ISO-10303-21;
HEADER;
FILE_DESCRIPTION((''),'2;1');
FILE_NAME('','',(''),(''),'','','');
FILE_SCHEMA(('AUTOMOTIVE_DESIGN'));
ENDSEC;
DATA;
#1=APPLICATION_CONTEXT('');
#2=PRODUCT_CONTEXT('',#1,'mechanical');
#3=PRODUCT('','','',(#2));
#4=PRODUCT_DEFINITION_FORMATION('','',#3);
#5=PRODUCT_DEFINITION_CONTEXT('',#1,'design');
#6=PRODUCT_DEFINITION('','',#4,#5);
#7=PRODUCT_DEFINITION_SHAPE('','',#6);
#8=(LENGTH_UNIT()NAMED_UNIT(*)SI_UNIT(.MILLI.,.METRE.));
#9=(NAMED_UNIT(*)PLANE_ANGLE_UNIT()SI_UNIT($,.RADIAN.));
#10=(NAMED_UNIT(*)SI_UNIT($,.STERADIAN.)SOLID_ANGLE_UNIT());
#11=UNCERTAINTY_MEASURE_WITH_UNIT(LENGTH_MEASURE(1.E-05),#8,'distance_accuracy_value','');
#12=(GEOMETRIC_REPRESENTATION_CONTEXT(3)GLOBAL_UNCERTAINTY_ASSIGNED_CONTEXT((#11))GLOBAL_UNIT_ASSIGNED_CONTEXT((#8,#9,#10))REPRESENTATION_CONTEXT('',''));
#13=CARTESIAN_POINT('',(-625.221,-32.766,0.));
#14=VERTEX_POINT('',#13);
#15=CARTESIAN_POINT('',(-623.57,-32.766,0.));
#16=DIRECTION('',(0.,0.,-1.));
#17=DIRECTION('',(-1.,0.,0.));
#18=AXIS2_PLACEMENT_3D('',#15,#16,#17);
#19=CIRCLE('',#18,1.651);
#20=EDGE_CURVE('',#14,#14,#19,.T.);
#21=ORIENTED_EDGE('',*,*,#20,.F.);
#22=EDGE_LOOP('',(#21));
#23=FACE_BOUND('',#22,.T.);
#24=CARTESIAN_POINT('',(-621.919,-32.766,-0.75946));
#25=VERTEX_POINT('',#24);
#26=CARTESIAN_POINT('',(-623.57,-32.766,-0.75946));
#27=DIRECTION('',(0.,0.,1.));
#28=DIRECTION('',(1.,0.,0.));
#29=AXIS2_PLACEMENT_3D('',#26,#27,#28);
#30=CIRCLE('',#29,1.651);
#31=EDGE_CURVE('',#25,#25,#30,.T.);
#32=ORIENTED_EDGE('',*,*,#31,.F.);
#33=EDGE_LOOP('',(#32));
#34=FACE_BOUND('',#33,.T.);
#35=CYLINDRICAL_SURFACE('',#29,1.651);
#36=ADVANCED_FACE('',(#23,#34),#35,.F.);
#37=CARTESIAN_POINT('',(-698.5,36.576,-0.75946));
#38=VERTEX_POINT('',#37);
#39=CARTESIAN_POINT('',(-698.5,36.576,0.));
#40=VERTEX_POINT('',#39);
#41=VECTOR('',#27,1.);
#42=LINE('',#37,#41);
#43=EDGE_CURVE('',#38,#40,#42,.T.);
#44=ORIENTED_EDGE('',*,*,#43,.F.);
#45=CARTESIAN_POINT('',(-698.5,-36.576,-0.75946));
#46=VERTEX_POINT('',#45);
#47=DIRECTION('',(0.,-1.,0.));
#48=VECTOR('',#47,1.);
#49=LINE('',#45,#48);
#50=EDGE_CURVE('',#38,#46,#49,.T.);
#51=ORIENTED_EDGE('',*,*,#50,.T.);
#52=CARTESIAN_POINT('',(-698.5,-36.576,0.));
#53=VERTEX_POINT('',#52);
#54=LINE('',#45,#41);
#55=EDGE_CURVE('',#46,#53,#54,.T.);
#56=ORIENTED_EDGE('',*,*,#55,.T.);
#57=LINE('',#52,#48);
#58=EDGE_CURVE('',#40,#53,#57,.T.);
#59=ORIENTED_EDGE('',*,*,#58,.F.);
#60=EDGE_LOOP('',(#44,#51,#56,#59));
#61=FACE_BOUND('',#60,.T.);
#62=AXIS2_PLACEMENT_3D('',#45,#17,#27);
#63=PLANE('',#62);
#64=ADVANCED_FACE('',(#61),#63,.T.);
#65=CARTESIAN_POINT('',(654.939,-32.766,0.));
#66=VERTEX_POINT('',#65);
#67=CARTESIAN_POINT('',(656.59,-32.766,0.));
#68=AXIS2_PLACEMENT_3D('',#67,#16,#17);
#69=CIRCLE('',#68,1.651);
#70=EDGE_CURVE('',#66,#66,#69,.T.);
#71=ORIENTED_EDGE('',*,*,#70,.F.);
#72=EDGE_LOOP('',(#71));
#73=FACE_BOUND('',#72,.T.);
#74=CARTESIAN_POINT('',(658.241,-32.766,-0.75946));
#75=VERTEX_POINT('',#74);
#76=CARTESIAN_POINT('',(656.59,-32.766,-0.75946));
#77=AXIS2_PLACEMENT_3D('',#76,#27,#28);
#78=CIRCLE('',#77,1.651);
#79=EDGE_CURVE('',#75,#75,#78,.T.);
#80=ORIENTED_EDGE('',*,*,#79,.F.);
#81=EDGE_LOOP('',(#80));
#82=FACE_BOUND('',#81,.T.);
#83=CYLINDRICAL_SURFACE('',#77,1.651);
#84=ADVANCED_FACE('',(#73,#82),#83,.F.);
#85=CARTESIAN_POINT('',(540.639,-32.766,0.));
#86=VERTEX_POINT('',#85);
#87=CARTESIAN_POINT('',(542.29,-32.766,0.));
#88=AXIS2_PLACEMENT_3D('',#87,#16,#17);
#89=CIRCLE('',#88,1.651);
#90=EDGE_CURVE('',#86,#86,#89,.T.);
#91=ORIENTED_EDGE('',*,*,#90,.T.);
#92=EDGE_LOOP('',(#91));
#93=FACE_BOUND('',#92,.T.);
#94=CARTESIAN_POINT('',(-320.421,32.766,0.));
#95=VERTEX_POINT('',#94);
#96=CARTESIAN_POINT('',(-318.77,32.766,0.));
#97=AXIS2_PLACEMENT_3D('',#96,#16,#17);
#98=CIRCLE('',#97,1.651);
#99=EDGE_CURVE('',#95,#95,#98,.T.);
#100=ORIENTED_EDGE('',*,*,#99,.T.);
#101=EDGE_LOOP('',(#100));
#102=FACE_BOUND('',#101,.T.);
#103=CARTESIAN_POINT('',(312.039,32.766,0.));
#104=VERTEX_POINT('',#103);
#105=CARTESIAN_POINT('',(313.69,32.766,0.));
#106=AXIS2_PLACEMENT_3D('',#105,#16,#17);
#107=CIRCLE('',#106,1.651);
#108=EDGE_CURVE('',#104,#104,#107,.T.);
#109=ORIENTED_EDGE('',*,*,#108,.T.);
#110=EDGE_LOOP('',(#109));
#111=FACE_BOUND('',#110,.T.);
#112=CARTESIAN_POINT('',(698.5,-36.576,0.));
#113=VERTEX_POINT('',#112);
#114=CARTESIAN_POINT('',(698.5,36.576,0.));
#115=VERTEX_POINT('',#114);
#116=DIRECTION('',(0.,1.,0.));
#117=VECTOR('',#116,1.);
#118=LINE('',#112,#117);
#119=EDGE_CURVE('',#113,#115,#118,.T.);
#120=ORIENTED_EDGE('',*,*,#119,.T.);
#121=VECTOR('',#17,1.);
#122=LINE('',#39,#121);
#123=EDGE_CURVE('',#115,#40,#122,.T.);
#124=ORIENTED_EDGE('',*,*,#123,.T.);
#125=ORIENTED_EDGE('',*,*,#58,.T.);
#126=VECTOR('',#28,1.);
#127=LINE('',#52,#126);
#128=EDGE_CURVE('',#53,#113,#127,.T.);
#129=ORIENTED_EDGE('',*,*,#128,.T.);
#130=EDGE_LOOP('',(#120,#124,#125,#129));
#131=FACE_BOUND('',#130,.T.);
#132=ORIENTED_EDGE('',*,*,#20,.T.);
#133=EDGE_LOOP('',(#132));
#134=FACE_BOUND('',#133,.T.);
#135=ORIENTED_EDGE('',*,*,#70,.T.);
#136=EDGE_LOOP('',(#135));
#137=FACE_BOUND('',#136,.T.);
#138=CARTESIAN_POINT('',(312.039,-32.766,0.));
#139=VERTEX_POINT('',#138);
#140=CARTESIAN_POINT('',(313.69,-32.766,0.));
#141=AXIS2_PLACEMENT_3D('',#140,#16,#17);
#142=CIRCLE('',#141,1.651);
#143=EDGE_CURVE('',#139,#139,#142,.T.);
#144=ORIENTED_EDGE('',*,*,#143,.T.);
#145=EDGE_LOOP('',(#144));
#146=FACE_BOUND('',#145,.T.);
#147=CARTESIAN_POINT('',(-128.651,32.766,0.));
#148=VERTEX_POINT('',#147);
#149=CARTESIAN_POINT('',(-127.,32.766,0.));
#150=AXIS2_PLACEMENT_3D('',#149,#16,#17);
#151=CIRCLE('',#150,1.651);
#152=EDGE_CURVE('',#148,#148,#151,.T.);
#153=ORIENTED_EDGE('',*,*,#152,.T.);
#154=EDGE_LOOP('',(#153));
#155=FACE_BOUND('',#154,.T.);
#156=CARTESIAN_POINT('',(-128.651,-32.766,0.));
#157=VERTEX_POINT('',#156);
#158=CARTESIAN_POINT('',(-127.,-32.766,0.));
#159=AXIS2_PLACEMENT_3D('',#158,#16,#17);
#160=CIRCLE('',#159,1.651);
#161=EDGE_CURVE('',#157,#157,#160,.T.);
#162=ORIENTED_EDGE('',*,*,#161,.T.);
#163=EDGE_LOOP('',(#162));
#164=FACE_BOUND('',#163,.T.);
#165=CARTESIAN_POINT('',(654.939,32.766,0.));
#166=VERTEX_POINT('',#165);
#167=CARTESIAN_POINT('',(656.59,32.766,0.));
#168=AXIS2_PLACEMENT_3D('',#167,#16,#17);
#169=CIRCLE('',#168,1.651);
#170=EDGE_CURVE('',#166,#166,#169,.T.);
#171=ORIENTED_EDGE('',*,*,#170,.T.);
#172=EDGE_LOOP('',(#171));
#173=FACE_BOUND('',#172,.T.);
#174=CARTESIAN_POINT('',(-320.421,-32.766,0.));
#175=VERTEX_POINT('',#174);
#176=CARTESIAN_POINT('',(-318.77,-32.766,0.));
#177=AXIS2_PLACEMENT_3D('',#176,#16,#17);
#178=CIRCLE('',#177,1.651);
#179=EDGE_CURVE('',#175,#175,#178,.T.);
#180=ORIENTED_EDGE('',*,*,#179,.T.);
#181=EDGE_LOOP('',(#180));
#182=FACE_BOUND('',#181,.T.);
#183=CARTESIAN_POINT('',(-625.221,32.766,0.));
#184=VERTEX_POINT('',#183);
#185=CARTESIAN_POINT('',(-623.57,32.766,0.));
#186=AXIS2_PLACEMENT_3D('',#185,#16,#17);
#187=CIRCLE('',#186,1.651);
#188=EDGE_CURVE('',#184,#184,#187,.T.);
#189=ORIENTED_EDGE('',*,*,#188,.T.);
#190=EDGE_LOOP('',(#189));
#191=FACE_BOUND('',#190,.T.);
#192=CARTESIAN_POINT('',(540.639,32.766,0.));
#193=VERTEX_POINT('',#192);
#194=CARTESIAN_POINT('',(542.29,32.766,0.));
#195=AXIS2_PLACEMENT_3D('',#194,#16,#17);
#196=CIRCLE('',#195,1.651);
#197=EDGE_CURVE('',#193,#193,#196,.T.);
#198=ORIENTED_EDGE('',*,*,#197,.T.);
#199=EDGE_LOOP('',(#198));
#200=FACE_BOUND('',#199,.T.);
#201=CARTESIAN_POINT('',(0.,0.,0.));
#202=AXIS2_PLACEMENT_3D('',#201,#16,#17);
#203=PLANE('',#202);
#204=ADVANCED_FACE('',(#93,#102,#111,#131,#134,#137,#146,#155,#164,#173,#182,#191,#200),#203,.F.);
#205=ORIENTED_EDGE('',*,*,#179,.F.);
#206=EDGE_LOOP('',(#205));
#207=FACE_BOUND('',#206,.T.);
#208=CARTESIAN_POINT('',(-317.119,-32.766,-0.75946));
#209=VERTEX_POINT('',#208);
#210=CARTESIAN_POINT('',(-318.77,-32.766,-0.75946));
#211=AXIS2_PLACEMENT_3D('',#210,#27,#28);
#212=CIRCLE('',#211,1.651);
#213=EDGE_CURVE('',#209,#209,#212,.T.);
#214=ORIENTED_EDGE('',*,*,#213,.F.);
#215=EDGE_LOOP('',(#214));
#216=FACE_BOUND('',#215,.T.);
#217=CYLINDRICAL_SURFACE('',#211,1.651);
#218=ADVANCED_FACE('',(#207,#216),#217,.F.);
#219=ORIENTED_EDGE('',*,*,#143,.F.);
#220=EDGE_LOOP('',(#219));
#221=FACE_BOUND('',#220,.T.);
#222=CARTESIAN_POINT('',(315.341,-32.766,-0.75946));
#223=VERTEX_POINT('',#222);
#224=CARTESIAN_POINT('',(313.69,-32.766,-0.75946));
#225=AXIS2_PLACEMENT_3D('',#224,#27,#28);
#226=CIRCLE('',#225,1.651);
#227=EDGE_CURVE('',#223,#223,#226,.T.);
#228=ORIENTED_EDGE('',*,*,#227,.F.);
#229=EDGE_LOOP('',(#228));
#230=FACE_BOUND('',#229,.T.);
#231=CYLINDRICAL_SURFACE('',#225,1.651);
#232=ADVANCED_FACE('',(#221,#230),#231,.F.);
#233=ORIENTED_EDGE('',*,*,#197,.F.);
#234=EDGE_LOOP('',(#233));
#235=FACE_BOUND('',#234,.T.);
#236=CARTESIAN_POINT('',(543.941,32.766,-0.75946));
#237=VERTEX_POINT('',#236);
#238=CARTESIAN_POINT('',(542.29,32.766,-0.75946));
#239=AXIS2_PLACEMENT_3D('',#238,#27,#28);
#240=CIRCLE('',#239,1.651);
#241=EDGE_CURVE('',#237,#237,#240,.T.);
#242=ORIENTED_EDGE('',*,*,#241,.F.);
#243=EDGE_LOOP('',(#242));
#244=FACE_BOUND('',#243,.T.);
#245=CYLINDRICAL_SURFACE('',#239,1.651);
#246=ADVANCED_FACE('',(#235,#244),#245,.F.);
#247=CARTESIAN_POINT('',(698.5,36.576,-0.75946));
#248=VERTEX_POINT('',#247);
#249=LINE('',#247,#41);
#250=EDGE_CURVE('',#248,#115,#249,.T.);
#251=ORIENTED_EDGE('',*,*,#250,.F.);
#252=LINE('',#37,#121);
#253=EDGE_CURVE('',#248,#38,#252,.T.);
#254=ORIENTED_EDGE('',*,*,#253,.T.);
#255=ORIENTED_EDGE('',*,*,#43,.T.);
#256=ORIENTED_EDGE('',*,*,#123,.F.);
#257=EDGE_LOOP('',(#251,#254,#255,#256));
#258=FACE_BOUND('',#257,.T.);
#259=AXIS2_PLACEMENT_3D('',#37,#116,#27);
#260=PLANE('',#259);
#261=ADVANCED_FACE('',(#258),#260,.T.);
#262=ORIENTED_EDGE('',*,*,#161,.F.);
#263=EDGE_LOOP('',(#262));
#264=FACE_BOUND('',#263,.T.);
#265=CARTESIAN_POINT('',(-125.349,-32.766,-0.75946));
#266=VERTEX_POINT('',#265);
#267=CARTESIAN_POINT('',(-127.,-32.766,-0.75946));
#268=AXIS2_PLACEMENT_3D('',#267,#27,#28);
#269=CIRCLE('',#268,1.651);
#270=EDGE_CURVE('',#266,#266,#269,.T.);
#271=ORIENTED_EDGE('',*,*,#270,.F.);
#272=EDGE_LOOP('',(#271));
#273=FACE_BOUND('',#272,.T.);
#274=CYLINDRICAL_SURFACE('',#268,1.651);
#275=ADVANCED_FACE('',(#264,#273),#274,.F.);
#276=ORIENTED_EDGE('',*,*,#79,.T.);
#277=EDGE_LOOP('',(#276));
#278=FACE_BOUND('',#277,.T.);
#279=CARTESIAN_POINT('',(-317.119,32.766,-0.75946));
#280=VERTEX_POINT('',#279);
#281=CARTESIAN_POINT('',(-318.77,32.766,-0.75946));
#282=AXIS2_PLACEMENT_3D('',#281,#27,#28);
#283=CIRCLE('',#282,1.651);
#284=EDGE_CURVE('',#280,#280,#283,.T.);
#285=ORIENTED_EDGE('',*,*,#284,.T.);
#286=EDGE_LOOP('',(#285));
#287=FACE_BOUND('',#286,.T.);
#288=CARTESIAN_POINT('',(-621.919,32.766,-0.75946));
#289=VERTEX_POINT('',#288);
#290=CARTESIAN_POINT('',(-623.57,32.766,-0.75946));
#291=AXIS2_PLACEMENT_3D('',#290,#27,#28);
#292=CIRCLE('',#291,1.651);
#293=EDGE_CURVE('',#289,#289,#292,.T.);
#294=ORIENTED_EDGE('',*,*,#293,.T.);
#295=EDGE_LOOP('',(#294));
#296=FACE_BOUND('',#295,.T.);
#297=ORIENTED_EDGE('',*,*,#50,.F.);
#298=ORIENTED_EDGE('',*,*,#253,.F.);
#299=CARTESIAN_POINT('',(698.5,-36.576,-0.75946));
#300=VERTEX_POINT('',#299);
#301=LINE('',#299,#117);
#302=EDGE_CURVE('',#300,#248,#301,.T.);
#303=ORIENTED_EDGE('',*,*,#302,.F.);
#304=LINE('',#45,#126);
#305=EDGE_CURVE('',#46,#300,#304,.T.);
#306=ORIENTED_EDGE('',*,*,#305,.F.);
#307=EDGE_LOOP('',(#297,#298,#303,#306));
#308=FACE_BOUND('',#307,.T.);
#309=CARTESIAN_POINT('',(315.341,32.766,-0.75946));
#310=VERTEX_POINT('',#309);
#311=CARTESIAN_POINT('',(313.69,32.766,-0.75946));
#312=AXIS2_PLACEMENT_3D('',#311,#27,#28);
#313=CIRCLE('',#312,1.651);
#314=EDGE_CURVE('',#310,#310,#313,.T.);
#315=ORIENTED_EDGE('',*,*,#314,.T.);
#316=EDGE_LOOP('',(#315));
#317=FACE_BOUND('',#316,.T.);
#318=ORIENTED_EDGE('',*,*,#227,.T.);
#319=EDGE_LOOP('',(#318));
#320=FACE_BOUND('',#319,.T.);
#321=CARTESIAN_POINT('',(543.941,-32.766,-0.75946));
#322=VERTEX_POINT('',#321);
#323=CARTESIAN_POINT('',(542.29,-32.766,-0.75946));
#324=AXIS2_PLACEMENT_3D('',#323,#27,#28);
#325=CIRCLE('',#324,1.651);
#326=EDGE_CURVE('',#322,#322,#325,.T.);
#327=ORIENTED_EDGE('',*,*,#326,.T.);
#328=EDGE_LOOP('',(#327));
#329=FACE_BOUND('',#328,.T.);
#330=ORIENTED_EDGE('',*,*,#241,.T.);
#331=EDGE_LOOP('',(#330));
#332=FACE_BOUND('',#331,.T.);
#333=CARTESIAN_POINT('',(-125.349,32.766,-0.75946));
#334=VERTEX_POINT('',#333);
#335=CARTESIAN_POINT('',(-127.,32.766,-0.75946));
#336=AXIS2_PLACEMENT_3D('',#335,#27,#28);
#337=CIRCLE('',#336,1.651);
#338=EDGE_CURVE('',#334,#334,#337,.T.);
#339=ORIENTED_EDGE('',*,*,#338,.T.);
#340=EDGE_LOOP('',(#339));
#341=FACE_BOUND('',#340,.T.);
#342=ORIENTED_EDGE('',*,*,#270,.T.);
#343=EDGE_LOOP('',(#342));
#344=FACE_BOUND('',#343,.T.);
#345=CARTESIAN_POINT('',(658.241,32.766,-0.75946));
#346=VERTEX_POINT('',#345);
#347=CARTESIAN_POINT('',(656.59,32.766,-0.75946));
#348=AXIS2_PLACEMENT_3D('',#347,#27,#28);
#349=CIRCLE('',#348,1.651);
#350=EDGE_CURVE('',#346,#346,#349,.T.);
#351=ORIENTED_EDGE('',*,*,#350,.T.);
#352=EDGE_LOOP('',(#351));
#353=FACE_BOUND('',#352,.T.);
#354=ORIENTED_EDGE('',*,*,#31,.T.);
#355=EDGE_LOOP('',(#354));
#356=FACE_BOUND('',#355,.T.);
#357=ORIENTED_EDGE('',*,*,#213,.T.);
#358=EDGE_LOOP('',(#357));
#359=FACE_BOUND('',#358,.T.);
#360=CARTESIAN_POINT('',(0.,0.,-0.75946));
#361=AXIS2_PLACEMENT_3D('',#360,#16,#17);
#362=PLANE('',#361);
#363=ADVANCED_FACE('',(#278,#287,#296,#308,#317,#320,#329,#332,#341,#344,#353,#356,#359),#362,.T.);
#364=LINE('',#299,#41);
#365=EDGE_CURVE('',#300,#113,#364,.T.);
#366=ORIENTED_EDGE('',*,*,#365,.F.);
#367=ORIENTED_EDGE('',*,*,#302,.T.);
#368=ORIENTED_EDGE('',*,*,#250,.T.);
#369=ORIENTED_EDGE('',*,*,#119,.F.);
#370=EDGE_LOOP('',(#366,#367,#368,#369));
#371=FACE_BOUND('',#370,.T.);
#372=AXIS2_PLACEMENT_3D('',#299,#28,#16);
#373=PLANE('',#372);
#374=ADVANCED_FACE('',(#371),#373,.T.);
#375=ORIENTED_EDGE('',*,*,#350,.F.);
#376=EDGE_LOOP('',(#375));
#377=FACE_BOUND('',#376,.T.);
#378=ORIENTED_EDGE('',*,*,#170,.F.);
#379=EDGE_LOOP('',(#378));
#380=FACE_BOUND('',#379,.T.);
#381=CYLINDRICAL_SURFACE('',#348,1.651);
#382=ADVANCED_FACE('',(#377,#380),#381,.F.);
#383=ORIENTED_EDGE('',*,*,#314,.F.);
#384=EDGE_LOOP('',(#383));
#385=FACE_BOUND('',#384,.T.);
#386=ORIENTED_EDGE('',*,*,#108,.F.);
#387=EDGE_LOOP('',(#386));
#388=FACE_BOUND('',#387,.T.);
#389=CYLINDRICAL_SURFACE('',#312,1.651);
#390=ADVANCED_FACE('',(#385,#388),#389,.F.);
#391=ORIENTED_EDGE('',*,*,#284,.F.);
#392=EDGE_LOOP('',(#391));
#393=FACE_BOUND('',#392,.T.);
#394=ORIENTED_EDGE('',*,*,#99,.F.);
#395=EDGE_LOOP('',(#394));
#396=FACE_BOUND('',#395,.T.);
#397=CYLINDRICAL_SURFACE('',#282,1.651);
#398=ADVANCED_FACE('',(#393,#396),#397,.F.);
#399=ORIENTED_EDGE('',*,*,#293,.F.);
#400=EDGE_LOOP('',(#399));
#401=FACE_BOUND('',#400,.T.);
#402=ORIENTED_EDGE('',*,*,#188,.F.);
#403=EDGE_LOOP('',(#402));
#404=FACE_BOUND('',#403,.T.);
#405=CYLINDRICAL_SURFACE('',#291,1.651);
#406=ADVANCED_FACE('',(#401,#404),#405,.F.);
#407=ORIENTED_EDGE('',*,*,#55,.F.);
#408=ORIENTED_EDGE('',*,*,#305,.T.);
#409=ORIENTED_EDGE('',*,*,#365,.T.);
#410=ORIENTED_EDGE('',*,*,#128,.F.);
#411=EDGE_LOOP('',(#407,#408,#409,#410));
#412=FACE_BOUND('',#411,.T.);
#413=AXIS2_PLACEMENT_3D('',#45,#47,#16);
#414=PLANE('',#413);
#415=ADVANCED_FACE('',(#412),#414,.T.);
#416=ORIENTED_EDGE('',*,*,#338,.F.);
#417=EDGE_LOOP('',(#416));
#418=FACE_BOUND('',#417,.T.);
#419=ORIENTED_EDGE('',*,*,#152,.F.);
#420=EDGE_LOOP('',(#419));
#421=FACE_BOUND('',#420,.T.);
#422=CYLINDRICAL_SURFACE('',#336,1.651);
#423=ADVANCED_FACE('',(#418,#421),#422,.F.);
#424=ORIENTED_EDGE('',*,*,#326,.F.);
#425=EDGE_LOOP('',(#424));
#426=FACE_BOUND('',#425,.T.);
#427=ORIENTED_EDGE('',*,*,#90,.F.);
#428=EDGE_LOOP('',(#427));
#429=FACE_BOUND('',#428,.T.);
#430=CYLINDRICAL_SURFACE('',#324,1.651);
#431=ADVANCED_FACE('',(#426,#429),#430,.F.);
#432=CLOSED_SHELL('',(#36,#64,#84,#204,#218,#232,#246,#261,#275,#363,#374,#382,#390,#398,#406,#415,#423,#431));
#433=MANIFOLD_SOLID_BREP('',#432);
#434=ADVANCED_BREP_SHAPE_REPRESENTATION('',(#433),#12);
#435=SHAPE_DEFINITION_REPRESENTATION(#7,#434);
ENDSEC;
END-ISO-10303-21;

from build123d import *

# Parameters (mm, degrees)
SKETCH2_W               = 1397
SKETCH2_H               = 73.152
BASE_FLANGE1_DEPTH      = 0.75946
CUT_EXTRUDE1_DEPTH      = 700.457382944
CUT_EXTRUDE1_DEPTH_BACK = 700.457382944
SKETCH3_R               = 1.651


# Sheet-metal steps are written as plain solids
with BuildPart() as part:
    # Sketch2 → Base-Flange1 (new body)
    with BuildSketch(Plane.XY):
        Rectangle(SKETCH2_W, SKETCH2_H)
    extrude(amount=-BASE_FLANGE1_DEPTH)

    # Sketch3 → Cut-Extrude1 (cut, two sides: drawn at the far end of the back side and taken through both)
    with BuildSketch(Plane.XY.offset(-CUT_EXTRUDE1_DEPTH_BACK)):
        with Locations((-623.57, 32.766)):
            Circle(SKETCH3_R)
        with Locations((-623.57, -32.766)):
            Circle(SKETCH3_R)
        with Locations((-127, 32.766)):
            Circle(SKETCH3_R)
        with Locations((-127, -32.766)):
            Circle(SKETCH3_R)
        with Locations((313.69, 32.766)):
            Circle(SKETCH3_R)
        with Locations((313.69, -32.766)):
            Circle(SKETCH3_R)
        with Locations((542.29, 32.766)):
            Circle(SKETCH3_R)
        with Locations((542.29, -32.766)):
            Circle(SKETCH3_R)
        with Locations((656.59, 32.766)):
            Circle(SKETCH3_R)
        with Locations((656.59, -32.766)):
            Circle(SKETCH3_R)
        with Locations((-318.77, 32.766)):
            Circle(SKETCH3_R)
        with Locations((-318.77, -32.766)):
            Circle(SKETCH3_R)
    extrude(amount=CUT_EXTRUDE1_DEPTH + CUT_EXTRUDE1_DEPTH_BACK, mode=Mode.SUBTRACT)


solid = part.part
